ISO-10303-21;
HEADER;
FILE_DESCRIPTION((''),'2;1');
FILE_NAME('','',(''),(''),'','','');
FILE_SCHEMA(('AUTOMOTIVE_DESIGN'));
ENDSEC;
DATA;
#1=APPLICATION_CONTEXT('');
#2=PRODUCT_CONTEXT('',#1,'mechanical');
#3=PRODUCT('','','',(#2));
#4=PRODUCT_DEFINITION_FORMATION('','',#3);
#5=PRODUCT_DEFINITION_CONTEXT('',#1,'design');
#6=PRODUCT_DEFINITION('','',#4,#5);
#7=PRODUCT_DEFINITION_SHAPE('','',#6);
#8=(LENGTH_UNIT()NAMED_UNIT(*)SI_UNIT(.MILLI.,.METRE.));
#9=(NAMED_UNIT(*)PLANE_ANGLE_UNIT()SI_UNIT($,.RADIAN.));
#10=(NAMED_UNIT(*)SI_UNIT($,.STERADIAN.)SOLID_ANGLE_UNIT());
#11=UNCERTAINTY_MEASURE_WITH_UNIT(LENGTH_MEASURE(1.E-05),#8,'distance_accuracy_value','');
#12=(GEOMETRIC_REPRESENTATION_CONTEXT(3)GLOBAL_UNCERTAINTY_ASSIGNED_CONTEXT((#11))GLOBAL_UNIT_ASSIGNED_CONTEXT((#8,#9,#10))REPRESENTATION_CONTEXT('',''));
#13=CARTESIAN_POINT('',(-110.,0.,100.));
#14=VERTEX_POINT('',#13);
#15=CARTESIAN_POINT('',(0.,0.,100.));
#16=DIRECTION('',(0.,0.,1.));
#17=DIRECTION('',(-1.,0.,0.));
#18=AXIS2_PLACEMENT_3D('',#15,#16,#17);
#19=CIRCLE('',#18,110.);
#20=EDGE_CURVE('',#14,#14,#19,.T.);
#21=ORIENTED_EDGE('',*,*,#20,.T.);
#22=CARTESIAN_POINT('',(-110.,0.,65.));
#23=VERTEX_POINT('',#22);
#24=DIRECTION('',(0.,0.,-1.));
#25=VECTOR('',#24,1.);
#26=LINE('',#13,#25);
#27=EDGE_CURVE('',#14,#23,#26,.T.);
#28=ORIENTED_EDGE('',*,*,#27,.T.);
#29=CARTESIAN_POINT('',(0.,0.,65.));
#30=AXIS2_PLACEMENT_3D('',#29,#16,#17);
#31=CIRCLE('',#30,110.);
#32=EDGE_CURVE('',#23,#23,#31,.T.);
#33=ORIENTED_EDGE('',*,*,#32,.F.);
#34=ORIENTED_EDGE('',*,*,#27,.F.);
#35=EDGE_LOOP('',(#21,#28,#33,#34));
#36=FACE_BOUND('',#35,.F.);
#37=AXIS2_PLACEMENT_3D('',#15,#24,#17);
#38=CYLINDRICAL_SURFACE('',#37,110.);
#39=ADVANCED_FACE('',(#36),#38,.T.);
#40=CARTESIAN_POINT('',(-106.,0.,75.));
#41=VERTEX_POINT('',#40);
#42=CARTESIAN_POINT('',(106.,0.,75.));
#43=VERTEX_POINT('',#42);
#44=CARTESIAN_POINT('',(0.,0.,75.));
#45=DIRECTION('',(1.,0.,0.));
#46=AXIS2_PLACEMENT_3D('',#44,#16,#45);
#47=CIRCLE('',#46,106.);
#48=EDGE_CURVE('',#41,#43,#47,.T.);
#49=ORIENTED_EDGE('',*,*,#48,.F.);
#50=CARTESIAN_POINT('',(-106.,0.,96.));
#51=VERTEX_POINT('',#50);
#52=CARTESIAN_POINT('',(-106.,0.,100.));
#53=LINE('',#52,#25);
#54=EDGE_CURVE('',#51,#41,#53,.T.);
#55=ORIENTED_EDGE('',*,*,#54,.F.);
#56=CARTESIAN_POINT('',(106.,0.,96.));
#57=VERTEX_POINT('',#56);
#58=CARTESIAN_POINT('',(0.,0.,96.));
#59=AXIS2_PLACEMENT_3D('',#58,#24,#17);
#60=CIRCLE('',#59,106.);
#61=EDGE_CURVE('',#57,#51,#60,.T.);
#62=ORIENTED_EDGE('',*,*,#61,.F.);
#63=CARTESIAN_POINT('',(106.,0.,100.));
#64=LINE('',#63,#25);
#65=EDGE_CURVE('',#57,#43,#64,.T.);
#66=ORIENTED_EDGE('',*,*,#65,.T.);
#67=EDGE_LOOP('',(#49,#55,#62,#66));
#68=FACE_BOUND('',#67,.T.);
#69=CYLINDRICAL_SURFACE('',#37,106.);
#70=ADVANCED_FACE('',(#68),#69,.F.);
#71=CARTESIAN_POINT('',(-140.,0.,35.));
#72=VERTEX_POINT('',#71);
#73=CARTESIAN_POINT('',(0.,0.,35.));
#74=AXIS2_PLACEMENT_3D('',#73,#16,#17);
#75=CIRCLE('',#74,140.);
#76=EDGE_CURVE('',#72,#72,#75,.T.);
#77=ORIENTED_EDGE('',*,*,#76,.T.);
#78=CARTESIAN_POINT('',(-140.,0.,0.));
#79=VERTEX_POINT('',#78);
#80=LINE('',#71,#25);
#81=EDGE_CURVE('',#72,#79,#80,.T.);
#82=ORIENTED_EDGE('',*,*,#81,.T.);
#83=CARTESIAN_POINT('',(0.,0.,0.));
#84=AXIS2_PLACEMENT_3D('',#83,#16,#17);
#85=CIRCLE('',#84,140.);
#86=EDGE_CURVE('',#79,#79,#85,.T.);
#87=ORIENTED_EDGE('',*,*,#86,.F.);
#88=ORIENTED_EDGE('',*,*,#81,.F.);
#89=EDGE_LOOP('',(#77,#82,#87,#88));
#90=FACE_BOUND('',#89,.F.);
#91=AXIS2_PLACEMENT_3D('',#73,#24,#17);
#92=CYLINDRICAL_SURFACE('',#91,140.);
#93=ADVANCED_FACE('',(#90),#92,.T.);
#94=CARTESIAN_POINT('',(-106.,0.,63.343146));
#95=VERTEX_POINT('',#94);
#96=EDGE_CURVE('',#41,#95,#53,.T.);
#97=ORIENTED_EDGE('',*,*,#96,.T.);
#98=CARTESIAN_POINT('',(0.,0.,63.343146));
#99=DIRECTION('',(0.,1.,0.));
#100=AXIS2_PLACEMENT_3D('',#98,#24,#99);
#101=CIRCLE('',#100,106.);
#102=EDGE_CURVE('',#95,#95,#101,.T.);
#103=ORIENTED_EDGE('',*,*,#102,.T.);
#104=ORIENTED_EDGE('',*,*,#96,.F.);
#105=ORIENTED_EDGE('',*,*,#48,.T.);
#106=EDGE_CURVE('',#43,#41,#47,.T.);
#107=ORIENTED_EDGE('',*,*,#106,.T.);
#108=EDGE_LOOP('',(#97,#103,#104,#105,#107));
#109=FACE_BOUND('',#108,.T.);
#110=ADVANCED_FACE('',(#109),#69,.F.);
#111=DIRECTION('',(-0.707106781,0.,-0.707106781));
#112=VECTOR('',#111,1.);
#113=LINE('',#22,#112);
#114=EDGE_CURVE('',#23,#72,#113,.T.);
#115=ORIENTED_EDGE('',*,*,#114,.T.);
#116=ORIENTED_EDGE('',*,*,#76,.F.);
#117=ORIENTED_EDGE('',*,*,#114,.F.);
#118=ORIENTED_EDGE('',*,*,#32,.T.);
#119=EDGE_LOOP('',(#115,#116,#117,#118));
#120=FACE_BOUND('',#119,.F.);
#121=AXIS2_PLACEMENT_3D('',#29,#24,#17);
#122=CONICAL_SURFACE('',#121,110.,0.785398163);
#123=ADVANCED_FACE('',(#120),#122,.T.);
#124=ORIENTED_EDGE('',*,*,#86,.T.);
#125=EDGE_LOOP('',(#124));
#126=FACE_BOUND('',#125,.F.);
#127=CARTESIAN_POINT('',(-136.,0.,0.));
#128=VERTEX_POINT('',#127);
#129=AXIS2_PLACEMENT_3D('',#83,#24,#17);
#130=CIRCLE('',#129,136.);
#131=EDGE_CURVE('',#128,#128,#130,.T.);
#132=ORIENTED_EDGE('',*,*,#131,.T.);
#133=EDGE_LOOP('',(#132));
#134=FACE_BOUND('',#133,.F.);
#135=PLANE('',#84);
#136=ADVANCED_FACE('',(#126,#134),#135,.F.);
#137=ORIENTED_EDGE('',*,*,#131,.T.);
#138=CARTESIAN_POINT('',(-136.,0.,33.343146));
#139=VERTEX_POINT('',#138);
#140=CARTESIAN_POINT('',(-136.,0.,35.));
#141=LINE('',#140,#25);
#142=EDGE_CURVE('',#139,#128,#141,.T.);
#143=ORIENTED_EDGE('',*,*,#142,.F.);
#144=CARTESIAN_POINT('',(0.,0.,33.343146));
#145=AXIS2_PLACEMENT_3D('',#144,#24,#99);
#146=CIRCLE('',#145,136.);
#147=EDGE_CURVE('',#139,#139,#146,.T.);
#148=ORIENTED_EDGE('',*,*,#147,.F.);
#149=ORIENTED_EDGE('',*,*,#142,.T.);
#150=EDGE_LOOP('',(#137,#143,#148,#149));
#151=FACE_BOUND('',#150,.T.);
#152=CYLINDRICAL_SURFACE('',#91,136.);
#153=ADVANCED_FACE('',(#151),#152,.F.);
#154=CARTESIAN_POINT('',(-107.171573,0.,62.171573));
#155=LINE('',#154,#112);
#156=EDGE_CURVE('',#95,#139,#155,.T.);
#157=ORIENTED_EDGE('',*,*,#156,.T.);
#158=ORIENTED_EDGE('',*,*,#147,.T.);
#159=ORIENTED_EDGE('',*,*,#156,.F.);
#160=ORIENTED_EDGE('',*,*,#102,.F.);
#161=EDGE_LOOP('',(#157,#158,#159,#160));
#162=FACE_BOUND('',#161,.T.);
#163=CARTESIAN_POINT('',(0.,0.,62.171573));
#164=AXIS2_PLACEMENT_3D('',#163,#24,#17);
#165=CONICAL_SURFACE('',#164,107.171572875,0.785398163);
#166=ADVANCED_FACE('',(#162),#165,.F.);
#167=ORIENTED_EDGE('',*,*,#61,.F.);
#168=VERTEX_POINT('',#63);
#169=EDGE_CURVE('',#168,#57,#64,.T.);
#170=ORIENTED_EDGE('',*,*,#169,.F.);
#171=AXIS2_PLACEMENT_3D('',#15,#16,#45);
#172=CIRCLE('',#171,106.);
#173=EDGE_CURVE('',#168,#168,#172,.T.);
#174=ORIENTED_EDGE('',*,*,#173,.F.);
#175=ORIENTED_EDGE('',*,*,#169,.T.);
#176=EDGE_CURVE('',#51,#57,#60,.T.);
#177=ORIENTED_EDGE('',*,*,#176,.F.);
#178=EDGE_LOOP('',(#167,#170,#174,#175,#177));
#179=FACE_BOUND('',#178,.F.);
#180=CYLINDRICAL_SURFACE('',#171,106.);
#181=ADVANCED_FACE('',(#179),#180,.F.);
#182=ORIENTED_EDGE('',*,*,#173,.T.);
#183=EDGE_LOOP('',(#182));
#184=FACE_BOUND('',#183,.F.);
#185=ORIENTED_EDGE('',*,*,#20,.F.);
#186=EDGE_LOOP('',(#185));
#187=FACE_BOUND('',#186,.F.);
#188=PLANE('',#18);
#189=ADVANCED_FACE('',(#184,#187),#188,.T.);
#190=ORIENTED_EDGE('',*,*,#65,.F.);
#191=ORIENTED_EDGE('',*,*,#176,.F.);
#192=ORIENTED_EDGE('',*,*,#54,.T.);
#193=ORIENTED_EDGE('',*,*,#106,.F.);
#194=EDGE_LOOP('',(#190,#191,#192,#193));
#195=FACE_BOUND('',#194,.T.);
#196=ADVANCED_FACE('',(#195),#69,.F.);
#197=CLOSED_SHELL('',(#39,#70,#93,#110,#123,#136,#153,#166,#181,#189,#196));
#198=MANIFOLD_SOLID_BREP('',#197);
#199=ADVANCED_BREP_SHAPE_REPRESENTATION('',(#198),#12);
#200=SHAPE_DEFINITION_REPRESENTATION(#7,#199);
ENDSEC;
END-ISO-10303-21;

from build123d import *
from build123d import SkipClean  # not in build123d's __all__

# Parameters (mm, degrees)
F2_T     = -4
F3_R     = 106
F4_DEPTH = 25


with BuildPart() as f1:
    # F0 (on Front) → F1 (revolve)
    with BuildSketch(Plane.XZ):
        Polygon((-140, 35), (-140, 0), (0, 0), (0, 100), (-110, 100), (-110, 65), align=None)
    revolve(axis=Axis((0, 0, 50), (0, 0, 1)))

    # F2
    f2_openings = [f1.faces().sort_by_distance(p)[0] for p in [
        (0, 0, 0),
    ]]
    offset(amount=F2_T, openings=f2_openings, kind=Kind.INTERSECTION)

    # F3 (on face) → F4 (cut)
    with BuildSketch(Plane.XY.offset(100)):
        Circle(F3_R)
    with SkipClean():  # cleaning this boolean's faces spoils the solid; the shape is the same uncleaned
        extrude(amount=-F4_DEPTH, mode=Mode.SUBTRACT)


solid = f1.part
